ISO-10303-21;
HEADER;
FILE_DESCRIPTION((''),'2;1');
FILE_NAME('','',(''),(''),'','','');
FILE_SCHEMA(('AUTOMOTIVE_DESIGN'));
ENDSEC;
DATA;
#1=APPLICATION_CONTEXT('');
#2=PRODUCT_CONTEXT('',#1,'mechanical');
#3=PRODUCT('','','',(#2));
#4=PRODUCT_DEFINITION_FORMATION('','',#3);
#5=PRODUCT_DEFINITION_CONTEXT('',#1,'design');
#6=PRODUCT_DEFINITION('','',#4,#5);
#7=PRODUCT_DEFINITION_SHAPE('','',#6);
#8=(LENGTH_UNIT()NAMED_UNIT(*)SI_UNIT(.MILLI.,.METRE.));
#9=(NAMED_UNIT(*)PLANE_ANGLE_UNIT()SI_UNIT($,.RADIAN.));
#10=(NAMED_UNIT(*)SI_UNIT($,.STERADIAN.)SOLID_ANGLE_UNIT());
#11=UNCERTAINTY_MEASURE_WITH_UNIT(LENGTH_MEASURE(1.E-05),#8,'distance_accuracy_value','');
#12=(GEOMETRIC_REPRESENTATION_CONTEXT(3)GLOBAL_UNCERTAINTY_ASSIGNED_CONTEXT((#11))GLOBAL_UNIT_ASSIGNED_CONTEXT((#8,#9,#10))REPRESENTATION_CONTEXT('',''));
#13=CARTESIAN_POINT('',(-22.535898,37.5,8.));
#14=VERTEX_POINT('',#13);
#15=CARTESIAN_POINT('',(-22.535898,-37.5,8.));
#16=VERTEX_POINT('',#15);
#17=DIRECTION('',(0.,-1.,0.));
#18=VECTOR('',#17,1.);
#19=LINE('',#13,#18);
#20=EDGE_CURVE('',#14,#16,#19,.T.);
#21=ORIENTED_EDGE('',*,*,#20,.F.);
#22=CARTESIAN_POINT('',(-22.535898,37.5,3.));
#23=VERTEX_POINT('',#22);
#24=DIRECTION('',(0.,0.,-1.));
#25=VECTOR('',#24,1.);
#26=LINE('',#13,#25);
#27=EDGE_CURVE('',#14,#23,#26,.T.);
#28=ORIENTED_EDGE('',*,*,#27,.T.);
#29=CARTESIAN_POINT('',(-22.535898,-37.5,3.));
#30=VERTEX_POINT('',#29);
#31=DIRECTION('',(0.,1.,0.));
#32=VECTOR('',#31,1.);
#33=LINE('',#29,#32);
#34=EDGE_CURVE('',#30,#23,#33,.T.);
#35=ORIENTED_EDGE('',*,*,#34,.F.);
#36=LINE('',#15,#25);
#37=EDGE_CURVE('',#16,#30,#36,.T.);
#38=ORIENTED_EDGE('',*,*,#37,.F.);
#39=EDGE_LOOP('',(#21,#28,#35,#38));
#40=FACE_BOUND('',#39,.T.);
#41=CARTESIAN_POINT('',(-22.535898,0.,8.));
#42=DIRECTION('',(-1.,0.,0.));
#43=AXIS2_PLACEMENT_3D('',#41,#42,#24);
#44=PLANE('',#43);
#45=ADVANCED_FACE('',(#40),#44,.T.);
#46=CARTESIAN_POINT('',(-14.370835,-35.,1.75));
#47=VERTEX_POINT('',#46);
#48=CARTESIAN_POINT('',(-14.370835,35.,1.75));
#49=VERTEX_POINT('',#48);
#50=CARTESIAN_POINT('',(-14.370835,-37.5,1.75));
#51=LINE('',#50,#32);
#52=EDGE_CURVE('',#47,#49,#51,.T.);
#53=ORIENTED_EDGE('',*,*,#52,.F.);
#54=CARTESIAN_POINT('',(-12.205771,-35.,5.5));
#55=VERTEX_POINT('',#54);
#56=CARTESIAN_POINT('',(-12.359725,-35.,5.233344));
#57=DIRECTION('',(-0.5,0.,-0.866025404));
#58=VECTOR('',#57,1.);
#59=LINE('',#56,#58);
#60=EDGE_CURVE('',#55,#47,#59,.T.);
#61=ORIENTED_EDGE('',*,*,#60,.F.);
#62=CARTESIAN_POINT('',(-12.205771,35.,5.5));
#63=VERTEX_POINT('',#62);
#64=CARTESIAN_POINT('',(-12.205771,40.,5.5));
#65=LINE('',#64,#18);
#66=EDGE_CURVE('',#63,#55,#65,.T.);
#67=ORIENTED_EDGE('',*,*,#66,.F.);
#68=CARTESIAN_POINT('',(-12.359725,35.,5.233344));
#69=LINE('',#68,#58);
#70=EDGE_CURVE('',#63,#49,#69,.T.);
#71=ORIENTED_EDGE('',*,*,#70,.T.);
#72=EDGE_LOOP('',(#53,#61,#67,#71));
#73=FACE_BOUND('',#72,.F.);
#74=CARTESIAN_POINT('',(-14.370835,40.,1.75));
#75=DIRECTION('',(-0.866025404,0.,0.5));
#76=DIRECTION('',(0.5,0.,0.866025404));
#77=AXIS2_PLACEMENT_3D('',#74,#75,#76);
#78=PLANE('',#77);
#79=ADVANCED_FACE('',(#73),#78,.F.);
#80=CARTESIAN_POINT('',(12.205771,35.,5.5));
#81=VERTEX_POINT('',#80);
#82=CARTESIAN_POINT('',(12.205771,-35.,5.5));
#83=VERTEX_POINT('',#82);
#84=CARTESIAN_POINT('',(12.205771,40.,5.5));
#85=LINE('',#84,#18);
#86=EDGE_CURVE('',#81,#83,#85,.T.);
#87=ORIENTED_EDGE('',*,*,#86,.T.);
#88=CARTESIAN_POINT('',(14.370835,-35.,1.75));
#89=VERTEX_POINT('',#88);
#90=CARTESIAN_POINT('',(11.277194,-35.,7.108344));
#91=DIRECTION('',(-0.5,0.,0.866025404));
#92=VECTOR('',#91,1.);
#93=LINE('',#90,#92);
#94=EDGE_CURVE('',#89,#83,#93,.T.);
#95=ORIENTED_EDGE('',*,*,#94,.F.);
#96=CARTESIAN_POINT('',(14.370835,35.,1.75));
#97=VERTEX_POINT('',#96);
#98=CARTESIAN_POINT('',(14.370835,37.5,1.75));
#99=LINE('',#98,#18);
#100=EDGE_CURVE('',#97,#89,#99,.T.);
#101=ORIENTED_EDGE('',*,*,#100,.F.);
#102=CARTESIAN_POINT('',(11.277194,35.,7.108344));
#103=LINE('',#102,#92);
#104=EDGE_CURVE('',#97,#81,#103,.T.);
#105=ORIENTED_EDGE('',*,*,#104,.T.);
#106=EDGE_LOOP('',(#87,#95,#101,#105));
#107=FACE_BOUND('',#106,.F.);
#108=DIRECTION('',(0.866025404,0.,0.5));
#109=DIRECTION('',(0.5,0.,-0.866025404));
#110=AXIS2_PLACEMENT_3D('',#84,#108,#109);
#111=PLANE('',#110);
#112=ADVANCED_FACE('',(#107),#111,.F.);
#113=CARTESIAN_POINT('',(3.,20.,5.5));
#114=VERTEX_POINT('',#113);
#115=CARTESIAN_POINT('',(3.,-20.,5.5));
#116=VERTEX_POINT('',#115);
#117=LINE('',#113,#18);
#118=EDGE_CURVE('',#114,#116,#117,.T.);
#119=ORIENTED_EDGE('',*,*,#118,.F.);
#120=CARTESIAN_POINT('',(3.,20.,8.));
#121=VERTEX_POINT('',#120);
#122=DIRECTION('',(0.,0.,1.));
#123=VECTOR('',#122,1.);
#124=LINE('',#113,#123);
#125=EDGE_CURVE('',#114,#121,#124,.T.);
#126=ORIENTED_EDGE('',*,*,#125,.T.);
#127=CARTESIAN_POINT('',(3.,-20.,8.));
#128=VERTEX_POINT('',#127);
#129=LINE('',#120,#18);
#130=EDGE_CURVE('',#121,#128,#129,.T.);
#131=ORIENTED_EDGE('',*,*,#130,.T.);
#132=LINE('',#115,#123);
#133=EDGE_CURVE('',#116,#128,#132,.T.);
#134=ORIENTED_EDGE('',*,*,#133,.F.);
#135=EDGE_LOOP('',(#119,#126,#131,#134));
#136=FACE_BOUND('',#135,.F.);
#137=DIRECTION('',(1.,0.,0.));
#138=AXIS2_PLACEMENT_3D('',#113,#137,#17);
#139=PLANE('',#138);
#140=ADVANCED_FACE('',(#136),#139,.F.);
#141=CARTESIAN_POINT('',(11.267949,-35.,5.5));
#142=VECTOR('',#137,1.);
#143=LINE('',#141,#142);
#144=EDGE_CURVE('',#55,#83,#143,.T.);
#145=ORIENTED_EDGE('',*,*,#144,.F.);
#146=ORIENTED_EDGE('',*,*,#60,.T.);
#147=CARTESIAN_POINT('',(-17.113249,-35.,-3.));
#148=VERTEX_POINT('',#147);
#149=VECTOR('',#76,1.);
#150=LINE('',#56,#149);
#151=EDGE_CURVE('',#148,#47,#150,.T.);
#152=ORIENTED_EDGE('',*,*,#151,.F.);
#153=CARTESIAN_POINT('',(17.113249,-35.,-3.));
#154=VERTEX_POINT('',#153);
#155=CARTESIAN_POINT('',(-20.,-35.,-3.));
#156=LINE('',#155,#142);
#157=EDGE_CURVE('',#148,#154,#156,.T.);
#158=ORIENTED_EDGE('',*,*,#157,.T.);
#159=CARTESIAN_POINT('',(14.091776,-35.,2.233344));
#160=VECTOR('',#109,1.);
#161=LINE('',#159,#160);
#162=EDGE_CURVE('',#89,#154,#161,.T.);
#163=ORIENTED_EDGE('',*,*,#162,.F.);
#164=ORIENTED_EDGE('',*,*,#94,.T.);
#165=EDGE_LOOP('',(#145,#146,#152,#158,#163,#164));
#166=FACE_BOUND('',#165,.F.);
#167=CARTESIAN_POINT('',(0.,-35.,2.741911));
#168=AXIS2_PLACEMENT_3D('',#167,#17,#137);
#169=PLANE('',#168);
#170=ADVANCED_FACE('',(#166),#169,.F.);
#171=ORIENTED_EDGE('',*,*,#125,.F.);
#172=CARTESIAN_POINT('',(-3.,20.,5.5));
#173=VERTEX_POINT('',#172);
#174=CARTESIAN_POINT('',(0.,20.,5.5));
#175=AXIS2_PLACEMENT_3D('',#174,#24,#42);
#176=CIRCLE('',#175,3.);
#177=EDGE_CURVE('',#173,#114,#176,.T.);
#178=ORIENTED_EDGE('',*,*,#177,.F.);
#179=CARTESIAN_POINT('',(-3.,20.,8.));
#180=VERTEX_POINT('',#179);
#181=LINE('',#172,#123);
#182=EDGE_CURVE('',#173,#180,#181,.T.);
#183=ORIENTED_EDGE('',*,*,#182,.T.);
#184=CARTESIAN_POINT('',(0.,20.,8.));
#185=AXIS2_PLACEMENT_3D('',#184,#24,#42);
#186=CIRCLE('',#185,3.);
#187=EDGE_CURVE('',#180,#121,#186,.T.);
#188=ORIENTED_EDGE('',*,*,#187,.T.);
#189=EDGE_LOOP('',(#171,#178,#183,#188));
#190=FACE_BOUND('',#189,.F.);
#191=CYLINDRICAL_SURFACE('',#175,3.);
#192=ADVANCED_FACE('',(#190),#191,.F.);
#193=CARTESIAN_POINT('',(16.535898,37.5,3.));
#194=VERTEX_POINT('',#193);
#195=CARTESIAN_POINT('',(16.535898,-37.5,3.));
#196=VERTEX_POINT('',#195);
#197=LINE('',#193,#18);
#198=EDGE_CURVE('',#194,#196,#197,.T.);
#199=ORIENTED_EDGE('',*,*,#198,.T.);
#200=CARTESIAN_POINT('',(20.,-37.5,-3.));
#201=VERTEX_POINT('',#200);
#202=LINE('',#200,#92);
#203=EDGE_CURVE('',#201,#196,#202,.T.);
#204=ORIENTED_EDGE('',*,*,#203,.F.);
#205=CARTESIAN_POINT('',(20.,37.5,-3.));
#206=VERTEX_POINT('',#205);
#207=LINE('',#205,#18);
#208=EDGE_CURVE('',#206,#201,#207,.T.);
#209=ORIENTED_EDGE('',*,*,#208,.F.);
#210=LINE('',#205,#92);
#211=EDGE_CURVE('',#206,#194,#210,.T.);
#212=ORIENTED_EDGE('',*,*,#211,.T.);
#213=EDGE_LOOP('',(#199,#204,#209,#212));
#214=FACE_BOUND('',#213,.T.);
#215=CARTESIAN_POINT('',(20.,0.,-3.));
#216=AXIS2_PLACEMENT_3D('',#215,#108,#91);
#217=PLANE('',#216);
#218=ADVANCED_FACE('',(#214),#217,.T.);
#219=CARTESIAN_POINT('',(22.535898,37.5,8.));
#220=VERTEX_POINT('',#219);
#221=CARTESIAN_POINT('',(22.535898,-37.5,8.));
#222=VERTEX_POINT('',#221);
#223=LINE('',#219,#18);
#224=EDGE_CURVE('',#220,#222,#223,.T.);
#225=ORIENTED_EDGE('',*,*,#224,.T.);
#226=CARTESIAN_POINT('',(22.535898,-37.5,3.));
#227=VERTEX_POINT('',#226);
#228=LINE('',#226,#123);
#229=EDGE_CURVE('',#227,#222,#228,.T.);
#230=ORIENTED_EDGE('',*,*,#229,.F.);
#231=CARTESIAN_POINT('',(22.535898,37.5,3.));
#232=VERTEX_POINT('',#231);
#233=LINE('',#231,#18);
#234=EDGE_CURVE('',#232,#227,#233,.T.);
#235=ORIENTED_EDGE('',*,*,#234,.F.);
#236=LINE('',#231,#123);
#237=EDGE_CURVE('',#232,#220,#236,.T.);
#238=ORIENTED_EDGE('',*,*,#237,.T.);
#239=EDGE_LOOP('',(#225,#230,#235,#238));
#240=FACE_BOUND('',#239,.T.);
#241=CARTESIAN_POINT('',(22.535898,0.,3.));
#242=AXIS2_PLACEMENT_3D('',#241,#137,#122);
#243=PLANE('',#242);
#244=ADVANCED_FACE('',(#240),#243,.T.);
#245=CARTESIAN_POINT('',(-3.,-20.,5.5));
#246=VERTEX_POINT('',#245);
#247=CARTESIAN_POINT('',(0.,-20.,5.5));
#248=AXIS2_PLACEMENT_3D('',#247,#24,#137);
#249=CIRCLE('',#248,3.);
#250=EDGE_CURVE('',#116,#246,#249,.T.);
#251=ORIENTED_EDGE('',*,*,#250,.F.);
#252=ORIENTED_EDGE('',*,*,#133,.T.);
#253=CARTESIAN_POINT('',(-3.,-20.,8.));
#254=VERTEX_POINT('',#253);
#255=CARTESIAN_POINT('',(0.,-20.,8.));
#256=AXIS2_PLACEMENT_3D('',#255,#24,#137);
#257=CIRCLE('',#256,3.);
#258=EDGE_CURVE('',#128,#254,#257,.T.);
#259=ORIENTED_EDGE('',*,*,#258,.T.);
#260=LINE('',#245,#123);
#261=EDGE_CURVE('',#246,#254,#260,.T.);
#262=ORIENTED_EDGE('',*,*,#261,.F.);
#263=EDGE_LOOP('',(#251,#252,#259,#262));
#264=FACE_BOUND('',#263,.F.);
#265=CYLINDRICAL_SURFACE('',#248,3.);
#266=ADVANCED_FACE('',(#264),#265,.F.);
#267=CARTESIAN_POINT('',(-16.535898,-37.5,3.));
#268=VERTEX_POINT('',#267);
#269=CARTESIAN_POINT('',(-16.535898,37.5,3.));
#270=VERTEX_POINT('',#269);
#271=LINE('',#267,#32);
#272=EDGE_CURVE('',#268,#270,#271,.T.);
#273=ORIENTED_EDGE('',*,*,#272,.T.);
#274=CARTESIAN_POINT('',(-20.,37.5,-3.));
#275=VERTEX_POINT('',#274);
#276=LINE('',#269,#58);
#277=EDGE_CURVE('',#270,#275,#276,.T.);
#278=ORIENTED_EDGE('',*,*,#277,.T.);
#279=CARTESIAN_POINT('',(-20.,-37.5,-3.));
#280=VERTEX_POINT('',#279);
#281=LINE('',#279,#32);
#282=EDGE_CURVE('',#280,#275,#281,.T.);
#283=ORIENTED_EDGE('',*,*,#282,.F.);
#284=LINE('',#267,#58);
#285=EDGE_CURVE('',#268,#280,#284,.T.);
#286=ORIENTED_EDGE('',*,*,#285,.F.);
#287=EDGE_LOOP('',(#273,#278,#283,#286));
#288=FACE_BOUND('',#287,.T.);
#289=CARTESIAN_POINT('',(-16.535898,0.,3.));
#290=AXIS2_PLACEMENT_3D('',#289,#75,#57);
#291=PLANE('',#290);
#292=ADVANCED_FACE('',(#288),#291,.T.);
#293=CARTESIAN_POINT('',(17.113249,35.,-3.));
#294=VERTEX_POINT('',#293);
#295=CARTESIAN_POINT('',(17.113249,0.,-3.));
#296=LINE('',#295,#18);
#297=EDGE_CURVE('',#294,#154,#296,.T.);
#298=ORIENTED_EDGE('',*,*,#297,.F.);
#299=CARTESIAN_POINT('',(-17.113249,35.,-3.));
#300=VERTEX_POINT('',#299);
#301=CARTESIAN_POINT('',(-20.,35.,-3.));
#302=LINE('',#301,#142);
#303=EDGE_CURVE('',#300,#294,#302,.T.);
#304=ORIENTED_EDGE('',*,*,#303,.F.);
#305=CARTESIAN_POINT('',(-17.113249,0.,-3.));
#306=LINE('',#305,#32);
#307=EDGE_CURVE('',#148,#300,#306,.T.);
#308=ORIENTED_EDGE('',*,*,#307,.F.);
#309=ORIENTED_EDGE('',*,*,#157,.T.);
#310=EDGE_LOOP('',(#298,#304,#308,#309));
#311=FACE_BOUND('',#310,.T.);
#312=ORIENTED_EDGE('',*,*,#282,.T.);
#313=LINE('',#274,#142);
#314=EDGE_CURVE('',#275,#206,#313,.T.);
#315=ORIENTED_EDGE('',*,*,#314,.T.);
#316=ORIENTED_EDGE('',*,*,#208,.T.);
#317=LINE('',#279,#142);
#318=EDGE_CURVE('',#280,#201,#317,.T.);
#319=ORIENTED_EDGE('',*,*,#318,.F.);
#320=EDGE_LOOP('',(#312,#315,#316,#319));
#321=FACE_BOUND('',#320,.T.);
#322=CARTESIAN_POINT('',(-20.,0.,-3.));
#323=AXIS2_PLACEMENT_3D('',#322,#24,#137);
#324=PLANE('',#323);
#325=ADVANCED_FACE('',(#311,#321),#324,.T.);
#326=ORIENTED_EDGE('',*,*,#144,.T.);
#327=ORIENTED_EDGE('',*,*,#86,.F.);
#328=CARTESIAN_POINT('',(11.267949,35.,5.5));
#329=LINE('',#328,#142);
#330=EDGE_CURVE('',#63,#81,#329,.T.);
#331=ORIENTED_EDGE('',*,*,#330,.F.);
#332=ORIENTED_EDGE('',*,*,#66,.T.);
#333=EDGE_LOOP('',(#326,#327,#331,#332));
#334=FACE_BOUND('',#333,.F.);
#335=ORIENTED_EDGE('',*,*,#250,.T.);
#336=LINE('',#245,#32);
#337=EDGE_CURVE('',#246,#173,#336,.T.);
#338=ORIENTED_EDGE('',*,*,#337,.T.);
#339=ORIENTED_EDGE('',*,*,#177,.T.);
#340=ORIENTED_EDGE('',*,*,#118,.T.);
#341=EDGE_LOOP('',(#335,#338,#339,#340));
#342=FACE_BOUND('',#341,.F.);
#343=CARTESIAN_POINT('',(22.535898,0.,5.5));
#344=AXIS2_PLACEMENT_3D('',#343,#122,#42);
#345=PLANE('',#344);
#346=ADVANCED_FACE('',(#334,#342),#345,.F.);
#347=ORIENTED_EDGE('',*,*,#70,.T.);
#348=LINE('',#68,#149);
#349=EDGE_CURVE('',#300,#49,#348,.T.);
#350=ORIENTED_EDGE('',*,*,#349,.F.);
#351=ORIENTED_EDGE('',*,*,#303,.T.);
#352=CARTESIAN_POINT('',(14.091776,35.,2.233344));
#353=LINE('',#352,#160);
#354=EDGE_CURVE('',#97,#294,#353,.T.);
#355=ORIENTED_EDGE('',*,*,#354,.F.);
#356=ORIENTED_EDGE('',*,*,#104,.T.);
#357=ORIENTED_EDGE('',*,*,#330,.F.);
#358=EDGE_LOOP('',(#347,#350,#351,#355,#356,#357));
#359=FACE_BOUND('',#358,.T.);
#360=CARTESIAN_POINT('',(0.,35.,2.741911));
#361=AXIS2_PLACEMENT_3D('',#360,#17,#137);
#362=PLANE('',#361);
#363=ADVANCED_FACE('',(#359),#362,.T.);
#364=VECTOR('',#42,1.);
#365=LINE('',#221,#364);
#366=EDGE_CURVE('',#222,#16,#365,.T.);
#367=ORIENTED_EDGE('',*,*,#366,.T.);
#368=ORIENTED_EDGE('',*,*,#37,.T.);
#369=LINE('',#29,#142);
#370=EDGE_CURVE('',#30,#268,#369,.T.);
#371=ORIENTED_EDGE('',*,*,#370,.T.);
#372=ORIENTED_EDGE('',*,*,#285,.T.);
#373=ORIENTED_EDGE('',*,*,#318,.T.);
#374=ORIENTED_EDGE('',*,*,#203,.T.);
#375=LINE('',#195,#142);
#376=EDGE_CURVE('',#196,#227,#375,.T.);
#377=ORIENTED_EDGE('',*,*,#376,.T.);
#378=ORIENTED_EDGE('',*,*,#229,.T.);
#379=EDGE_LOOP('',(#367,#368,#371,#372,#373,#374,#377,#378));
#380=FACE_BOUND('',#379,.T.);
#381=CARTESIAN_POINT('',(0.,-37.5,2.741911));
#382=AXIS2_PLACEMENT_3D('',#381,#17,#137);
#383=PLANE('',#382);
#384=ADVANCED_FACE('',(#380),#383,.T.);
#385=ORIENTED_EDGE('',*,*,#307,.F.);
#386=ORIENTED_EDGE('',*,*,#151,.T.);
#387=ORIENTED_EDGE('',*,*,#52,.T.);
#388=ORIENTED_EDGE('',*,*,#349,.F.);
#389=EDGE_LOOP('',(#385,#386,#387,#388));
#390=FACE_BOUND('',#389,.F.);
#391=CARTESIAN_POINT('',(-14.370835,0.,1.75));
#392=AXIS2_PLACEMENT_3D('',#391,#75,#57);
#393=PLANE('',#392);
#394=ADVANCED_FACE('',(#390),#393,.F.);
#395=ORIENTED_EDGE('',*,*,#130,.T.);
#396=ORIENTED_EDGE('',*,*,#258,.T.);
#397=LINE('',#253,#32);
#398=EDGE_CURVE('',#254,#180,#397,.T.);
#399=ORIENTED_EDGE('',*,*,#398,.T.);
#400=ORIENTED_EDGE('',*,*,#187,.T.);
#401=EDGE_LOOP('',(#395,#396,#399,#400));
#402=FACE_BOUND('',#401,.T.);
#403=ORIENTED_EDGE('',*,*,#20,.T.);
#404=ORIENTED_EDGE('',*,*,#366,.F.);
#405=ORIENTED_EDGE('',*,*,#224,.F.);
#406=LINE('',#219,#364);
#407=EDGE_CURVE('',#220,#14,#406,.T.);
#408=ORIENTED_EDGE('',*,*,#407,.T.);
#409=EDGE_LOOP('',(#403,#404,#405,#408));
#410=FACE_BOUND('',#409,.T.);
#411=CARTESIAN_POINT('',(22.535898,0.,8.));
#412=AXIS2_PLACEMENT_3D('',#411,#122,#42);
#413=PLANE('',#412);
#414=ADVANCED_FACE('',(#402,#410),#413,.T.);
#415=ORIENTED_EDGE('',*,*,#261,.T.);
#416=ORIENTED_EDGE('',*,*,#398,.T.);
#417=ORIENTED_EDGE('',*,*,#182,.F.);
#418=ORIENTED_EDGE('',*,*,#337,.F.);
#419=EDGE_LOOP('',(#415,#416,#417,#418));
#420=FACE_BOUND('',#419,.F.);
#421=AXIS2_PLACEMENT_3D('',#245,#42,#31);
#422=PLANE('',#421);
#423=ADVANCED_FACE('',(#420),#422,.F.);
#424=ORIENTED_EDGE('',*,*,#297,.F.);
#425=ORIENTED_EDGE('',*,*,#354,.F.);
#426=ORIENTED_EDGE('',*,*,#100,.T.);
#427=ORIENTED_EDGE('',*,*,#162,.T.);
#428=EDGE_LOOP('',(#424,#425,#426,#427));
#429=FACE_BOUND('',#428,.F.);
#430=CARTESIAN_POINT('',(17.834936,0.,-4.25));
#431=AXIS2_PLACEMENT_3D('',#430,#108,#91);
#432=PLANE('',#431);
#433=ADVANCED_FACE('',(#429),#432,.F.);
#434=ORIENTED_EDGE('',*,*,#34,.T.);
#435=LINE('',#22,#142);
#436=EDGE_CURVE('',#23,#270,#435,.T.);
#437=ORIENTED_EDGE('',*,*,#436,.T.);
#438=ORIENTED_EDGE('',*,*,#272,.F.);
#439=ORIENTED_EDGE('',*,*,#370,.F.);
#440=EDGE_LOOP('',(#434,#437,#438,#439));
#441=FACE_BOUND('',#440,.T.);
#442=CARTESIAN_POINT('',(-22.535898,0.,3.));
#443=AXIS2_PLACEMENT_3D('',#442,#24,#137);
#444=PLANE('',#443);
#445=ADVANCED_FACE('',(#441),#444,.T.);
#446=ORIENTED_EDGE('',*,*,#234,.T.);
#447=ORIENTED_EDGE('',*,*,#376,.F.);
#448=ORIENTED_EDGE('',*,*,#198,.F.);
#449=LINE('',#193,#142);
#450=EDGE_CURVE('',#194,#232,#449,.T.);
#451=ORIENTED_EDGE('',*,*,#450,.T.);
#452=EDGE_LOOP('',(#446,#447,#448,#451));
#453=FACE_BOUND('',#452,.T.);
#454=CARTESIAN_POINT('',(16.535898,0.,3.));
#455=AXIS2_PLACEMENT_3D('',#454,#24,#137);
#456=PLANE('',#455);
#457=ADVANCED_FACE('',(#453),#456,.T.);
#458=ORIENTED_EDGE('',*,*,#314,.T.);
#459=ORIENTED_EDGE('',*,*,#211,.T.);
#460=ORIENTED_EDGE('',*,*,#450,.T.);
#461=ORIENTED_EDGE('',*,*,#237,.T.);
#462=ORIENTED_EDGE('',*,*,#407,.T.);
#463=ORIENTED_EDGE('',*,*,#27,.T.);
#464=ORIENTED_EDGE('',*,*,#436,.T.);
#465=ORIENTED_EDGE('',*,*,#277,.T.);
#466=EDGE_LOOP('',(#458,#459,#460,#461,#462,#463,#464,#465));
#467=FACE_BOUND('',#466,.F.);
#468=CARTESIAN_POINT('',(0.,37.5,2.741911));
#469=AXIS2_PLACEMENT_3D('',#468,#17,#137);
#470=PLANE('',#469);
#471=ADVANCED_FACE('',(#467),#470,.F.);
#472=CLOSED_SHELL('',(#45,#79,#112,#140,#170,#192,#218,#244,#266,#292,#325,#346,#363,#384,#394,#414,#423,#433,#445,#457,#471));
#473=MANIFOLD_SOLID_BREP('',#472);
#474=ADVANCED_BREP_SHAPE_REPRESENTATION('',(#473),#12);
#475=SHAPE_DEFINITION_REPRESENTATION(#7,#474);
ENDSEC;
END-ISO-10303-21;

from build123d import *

# Parameters (mm, degrees)
F1_DEPTH    = 37.5
F2_T        = 2.5
F2_T3_DEPTH = 80
F4_DEPTH    = 2.5


# Not quite as in the source:
# - a shell that OpenCascade refuses in one call is made with other operations: the cavity is built on its own and cut out


with BuildPart() as f1:
    # F0 (on Front) → F1 (new body, symmetric)
    with BuildSketch(Plane.XZ):
        Polygon((-20, -3), (20, -3), (16.5358983849, 3), (22.5358983849, 3), (22.5358983849, 8), (-22.5358983849, 8), (-22.5358983849, 3), (-16.5358983849, 3), align=None)
    extrude(amount=F1_DEPTH, both=True)

    # F2: shell of thickness 2.5, made by hand


with BuildPart() as f2_core1:
    # F2_t2: copy of F1
    add(f1.part)

    # the walls: a layer under each face that stays
    f2_faces = [f2_core1.faces().sort_by_distance(p)[0] for p in [
        (-18.2679491924, 0, 0),
        (-19.5358983849, 0, 3),
        (-22.5358983849, 0, 5.5),
        (0, 0, 8),
        (22.5358983849, 0, 5.5),
        (19.5358983849, 0, 3),
        (18.2679491924, 0, 0),
        (0, -37.5, 2.5),
        (0, 37.5, 2.5),
    ]]
    thicken(f2_faces, amount=-F2_T, mode=Mode.SUBTRACT)

    # F2_s4 → F2_t3 (cut)
    with BuildSketch(Plane.XZ.offset(-40)):
        Polygon((-16.55754902, 2.9875), (-14.3708348754, 1.75), (-12.2057713659, 5.5), (-16.5358983849, 5.5), align=None)
        Polygon((16.55754902, 2.9875), (16.5358983849, 5.5), (12.2057713659, 5.5), (14.3708348754, 1.75), align=None)
    extrude(amount=F2_T3_DEPTH, mode=Mode.SUBTRACT)


with BuildPart() as f1_1:
    add(f1.part)

    # what is left inside the walls is the cavity
    f2_cavity = [f2_core1.part.solids().sort_by_distance(p)[0] for p in [
        (0, 11.666667, -2.975),
    ]]
    add(f2_cavity, mode=Mode.SUBTRACT)

    # F3 (on face) → F4 (cut, through all)
    with BuildSketch(Plane(origin=(0, 0, 5.5), x_dir=(1, 0, 0), z_dir=(0, 0, -1))):
        with BuildLine():
            Line((3, -20), (3, 20))
            ThreePointArc((3, 20), (0, 23), (-3, 20))
            Line((-3, 20), (-3, -20))
            ThreePointArc((-3, -20), (0, -23), (3, -20))
        make_face()
    extrude(amount=-F4_DEPTH, mode=Mode.SUBTRACT)


solid = f1_1.part
